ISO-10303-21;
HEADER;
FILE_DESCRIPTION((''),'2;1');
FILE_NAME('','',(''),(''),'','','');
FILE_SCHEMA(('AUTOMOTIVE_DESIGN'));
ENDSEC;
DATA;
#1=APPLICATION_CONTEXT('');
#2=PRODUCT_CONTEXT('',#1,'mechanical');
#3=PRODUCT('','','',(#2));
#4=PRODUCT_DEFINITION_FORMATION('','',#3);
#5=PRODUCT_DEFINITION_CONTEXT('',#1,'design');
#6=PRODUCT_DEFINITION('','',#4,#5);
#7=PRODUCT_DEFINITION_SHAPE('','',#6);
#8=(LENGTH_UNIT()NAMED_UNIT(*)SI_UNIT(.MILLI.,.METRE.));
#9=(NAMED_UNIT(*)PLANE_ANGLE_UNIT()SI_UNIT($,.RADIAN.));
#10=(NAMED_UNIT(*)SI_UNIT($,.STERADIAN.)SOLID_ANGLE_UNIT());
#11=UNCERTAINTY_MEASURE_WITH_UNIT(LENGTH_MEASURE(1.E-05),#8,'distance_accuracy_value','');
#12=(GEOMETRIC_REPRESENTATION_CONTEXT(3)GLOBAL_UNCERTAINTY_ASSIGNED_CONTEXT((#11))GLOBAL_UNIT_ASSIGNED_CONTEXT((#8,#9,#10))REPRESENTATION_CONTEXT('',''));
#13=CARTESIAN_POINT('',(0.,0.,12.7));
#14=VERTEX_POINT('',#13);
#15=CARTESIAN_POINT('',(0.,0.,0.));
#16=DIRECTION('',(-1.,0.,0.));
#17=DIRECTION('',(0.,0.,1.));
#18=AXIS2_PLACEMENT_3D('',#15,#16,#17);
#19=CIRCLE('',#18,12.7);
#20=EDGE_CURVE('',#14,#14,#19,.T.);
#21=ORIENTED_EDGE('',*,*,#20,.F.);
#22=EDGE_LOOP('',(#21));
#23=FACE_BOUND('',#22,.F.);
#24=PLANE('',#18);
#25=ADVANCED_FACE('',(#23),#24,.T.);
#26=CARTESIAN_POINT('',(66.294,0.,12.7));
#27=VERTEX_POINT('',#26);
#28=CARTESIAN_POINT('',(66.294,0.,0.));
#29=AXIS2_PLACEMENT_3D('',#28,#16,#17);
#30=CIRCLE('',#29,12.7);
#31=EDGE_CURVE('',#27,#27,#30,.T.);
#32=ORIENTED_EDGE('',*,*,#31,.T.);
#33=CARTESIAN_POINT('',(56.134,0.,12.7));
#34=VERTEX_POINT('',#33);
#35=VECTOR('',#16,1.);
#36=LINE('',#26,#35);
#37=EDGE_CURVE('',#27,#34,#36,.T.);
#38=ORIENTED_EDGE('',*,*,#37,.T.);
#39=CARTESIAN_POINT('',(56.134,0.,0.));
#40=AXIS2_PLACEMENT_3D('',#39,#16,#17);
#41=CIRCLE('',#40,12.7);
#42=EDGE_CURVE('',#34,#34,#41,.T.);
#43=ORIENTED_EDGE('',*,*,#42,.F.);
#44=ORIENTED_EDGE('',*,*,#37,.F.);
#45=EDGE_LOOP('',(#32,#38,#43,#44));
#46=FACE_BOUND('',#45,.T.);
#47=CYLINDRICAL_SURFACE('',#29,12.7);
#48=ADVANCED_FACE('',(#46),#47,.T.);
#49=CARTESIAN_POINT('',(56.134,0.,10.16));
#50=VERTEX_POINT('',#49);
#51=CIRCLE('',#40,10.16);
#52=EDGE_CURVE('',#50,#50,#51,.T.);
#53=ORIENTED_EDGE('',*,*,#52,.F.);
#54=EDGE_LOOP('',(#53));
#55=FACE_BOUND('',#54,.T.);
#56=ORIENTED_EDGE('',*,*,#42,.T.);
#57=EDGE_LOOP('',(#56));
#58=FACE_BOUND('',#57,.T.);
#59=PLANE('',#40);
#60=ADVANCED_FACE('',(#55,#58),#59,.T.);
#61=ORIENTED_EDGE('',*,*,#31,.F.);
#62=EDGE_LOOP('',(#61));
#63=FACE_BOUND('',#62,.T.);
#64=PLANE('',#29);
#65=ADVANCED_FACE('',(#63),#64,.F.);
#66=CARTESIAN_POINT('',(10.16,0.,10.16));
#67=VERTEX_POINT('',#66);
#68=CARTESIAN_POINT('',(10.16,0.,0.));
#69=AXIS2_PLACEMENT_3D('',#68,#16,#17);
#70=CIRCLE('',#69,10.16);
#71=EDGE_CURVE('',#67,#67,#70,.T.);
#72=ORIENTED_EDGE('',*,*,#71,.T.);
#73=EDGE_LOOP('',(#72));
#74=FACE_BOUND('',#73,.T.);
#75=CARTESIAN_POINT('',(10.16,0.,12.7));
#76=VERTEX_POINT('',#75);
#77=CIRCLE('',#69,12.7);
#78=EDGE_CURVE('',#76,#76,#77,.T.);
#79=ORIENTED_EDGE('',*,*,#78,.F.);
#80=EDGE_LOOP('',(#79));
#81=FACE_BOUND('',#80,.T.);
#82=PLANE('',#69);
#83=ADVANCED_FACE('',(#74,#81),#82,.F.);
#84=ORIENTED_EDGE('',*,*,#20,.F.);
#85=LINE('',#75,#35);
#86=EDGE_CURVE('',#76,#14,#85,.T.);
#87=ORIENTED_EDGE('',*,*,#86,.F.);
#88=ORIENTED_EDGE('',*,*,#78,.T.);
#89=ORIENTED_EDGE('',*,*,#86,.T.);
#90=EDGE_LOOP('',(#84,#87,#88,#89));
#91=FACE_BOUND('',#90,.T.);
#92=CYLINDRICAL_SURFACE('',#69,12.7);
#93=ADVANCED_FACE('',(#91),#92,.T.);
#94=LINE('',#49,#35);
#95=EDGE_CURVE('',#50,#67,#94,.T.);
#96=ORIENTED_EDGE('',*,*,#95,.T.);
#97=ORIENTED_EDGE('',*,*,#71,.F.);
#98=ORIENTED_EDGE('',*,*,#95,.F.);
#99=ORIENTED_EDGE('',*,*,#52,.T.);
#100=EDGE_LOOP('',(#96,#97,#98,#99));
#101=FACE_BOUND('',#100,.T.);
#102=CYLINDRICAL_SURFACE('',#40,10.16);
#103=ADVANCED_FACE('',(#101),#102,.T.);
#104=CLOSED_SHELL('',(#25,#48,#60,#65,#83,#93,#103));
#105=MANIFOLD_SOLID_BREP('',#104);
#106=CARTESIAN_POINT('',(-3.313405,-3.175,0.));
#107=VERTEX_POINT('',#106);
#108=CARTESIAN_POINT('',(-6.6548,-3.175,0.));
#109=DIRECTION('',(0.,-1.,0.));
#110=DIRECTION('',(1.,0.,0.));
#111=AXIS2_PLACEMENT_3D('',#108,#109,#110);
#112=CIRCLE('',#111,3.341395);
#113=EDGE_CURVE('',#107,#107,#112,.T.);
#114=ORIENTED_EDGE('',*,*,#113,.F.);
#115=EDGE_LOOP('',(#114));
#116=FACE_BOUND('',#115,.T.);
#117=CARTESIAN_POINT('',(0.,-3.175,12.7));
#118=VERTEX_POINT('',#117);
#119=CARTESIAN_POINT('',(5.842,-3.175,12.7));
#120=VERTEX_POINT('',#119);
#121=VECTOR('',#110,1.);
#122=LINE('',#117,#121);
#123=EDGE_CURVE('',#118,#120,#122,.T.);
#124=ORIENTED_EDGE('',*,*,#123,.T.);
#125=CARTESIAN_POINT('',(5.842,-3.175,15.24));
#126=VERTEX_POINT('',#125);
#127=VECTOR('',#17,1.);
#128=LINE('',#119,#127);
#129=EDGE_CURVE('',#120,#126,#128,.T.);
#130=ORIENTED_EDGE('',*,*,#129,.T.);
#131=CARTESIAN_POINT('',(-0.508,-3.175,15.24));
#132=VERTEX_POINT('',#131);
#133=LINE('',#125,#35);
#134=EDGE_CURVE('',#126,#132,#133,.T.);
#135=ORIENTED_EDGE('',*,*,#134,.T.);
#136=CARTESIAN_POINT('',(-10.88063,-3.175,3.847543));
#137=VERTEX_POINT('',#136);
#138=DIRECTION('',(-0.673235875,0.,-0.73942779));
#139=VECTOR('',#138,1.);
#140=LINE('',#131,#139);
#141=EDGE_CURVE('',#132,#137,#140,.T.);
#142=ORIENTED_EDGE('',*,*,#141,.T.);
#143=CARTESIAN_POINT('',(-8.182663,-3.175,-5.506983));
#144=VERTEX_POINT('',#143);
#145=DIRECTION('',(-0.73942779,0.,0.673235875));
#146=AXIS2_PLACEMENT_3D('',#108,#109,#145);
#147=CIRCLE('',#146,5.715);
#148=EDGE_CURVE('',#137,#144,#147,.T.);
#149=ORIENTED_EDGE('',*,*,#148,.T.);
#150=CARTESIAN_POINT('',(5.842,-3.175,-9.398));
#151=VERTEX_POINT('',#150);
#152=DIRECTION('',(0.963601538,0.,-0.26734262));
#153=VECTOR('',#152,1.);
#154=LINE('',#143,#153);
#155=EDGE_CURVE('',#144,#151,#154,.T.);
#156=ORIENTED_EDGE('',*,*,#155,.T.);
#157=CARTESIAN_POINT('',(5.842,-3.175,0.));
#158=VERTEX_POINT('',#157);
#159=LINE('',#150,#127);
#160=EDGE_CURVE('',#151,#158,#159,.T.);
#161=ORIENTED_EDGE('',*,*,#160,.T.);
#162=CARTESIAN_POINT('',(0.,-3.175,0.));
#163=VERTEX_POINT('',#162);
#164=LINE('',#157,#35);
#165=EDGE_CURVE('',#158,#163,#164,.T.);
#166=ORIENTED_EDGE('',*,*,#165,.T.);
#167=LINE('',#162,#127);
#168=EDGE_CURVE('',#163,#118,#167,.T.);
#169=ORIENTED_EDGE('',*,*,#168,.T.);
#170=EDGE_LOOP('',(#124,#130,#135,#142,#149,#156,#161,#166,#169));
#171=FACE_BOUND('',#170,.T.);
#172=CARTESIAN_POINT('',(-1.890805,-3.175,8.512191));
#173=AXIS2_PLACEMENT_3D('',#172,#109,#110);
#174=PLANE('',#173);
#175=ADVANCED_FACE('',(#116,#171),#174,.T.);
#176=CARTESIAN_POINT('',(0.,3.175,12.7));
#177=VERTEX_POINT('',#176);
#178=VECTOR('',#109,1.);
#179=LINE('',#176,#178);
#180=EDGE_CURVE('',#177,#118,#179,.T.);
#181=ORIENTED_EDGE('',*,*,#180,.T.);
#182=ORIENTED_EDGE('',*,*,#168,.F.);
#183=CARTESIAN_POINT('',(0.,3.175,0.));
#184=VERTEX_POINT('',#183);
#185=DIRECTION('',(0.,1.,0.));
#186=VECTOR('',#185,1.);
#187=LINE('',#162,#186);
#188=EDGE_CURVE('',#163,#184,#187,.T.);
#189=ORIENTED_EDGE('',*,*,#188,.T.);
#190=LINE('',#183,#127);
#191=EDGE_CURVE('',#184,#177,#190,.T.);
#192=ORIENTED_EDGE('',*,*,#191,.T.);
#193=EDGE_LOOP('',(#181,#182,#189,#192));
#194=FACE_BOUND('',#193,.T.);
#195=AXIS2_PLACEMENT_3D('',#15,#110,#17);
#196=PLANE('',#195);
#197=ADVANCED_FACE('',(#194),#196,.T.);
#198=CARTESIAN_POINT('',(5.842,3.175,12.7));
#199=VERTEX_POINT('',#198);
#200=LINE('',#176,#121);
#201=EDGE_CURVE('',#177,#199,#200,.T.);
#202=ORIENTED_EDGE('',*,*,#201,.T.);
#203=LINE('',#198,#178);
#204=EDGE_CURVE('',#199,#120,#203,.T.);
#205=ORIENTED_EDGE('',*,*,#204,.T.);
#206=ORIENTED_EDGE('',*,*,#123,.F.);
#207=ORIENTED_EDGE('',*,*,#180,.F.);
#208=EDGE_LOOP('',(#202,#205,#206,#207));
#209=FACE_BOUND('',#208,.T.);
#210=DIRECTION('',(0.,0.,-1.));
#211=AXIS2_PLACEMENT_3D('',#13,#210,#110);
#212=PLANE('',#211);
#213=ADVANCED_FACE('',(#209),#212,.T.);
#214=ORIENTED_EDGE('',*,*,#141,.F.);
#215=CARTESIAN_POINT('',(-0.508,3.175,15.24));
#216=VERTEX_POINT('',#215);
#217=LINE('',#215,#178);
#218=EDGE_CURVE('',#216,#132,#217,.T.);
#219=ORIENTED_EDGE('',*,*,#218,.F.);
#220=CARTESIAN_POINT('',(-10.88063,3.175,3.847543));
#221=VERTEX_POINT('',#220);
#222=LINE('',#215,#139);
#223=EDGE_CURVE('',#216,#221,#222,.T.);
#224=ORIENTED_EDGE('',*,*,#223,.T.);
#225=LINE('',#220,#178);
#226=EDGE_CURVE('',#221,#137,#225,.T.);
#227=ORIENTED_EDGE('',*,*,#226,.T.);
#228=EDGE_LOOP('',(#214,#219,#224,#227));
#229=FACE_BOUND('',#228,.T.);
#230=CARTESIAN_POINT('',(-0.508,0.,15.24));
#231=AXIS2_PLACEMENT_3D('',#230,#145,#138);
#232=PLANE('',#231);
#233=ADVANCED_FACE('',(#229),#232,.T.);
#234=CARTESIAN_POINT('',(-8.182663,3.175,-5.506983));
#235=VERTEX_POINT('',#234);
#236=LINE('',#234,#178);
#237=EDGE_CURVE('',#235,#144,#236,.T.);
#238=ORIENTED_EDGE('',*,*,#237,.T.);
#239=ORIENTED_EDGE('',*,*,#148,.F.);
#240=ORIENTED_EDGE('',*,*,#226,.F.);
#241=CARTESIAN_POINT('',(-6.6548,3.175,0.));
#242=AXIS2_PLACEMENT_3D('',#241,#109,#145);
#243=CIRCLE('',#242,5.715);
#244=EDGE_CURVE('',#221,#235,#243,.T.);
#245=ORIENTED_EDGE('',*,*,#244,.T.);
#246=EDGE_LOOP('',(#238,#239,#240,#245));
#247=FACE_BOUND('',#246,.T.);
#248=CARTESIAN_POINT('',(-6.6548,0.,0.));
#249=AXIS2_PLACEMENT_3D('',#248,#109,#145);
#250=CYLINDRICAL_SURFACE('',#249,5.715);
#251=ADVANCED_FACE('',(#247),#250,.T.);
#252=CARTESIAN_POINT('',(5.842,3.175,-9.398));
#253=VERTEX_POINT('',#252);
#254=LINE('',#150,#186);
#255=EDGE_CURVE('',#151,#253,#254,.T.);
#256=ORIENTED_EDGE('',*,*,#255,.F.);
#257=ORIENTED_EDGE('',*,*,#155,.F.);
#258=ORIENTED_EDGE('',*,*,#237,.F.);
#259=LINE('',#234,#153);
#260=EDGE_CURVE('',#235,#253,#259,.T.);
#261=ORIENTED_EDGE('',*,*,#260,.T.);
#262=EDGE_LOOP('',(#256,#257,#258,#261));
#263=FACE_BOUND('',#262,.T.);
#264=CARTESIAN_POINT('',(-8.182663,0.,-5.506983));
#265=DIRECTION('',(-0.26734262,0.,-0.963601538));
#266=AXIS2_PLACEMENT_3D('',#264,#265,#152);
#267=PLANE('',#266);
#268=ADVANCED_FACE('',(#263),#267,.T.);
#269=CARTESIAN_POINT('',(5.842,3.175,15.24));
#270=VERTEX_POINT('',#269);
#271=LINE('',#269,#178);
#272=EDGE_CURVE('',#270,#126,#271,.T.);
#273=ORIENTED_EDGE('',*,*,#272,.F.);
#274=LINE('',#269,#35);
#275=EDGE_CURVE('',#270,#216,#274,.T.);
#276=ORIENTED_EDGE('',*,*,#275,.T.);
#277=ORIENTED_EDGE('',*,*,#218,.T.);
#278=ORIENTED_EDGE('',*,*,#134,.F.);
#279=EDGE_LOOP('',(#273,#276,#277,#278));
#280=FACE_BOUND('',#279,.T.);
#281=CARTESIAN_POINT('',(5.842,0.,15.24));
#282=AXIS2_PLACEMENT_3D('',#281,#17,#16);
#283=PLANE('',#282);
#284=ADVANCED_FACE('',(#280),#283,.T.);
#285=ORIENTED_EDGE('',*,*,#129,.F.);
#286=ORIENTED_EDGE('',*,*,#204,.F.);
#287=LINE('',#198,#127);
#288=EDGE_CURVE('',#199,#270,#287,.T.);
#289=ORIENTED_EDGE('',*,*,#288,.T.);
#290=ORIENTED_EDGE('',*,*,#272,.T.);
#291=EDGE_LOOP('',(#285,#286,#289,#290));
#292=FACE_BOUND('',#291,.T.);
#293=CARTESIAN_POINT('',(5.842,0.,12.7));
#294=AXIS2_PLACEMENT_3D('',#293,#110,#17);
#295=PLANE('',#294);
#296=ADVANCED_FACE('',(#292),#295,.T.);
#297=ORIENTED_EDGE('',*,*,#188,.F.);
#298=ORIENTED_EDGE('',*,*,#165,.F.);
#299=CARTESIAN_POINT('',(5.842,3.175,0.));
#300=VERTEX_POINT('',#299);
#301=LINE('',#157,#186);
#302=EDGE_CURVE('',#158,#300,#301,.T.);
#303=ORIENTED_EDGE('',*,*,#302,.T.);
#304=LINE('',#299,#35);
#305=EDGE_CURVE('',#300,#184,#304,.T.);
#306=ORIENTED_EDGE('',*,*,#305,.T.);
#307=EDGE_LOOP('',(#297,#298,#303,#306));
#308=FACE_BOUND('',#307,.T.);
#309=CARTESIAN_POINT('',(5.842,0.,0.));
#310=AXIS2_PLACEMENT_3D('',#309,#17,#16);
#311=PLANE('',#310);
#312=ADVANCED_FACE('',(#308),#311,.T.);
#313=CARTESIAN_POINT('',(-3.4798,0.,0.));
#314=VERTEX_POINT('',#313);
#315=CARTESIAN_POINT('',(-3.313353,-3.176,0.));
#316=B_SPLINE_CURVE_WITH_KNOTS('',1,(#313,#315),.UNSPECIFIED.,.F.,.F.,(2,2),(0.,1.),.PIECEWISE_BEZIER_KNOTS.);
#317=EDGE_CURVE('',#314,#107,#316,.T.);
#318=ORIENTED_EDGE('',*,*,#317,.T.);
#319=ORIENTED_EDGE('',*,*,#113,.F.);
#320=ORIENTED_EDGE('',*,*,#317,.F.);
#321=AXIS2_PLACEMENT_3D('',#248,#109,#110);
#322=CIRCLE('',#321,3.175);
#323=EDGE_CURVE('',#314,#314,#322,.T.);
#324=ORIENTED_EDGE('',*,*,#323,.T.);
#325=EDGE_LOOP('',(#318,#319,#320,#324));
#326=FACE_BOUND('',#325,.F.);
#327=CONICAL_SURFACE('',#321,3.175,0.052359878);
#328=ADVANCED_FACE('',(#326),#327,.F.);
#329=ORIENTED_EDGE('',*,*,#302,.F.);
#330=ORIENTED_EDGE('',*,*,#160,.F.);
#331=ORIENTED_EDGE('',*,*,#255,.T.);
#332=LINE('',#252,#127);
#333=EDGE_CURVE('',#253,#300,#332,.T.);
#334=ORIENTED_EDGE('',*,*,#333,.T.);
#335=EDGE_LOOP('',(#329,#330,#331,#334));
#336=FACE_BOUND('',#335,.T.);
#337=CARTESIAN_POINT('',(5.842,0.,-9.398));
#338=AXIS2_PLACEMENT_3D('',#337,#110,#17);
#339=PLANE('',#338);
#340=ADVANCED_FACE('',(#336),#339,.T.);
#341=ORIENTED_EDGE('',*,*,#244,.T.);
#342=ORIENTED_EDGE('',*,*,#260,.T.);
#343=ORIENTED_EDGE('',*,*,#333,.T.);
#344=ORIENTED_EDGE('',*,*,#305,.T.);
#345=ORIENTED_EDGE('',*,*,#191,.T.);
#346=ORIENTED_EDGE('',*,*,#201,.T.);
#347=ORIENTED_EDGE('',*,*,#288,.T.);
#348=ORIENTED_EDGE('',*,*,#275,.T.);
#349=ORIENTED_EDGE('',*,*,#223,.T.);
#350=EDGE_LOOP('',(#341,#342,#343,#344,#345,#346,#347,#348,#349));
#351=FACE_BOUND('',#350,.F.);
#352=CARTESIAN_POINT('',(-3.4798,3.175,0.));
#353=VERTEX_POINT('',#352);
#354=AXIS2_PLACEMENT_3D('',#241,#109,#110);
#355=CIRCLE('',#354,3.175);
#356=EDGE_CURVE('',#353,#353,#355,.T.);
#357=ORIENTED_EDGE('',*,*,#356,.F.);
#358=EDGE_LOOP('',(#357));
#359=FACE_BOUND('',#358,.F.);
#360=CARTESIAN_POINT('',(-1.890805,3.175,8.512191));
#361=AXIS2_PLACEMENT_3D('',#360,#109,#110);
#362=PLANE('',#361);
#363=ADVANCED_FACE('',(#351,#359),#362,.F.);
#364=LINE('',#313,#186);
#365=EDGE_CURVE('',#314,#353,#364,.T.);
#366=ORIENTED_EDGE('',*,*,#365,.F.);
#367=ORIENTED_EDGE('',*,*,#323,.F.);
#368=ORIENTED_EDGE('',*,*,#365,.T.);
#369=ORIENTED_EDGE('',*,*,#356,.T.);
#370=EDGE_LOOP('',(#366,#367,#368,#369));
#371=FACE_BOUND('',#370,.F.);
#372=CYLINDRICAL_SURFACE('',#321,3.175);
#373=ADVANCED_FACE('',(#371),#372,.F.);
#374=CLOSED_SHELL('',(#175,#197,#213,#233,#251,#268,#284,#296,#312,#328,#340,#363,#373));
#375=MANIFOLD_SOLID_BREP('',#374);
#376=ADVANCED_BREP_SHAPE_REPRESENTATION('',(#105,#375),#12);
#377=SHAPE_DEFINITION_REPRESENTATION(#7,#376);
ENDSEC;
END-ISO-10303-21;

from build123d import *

# Parameters (mm, degrees)
F0_R          = 3.175
F1_DEPTH      = 3.175
F1_DEPTH_BACK = 3.175
F2_DEPTH      = 3.176
F2_TAPER      = -3
F2_DEPTH_BACK = 3.176
F0_W          = 5.842
F0_H          = 12.7


with BuildPart() as f1:
    # F0 (on Front) → F1 (new body, two sides)
    with BuildSketch(Plane.XZ) as f1_sk:
        with BuildLine():
            Line((-0.9398, 0), (0, 0))
            Line((0, 0), (0, 12.7))
            Line((0, 12.7), (5.842, 12.7))
            Line((5.842, 12.7), (5.842, 15.24))
            Line((5.842, 15.24), (-0.508, 15.24))
            Line((-0.508, 15.24), (-10.8806298187, 3.8475430269))
            ThreePointArc((-10.8806298187, 3.8475430269), (-4.5919612295, 5.3297205562), (-0.9398, 0))
        make_face()
        with BuildLine():
            Line((5.842, 0), (0, 0))
            Line((0, 0), (-0.9398, 0))
            ThreePointArc((-0.9398, 0), (-3.1957909266, -4.5493385486), (-8.1826630726, -5.5069827884))
            Line((-8.1826630726, -5.5069827884), (5.842, -9.398))
            Line((5.842, -9.398), (5.842, 0))
        make_face()
        with BuildLine():
            ThreePointArc((-8.1826630726, -5.5069827884), (-3.1957909266, -4.5493385486), (-0.9398, 0))
            ThreePointArc((-0.9398, 0), (-4.5919612295, 5.3297205562), (-10.8806298187, 3.8475430269))
            ThreePointArc((-10.8806298187, 3.8475430269), (-12.1459778134, -1.5837270034), (-8.1826630726, -5.5069827884))
        make_face()
        with Locations((-6.6548, 0)):
            Circle(F0_R, mode=Mode.SUBTRACT)
        with Locations((-6.6548, 0)):
            Circle(F0_R)
    extrude(amount=F1_DEPTH)
    extrude(f1_sk.sketch, amount=-F1_DEPTH_BACK)

    # F0 (on Front) → F2 (cut, two sides)
    with BuildSketch(Plane.XZ) as f2_sk:
        with Locations((-6.6548, 0)):
            Circle(F0_R)
    extrude(amount=F2_DEPTH, taper=F2_TAPER, mode=Mode.SUBTRACT)
    extrude(f2_sk.sketch, amount=-F2_DEPTH_BACK, mode=Mode.SUBTRACT)


with BuildPart() as f3:
    # F0 (on Front) → F3 (revolve)
    with BuildSketch(Plane.XZ):
        with Locations((2.921, 6.35)):
            Rectangle(F0_W, F0_H)
        Polygon((5.842, 12.7), (5.842, 0), (66.294, 0), (66.294, 12.7), (56.134, 12.7), (56.134, 10.16), (10.16, 10.16), (10.16, 12.7), align=None)
    revolve(axis=Axis((33.147, 0, 0), (-1, 0, 0)))


solid = Compound([f1.part, f3.part])
